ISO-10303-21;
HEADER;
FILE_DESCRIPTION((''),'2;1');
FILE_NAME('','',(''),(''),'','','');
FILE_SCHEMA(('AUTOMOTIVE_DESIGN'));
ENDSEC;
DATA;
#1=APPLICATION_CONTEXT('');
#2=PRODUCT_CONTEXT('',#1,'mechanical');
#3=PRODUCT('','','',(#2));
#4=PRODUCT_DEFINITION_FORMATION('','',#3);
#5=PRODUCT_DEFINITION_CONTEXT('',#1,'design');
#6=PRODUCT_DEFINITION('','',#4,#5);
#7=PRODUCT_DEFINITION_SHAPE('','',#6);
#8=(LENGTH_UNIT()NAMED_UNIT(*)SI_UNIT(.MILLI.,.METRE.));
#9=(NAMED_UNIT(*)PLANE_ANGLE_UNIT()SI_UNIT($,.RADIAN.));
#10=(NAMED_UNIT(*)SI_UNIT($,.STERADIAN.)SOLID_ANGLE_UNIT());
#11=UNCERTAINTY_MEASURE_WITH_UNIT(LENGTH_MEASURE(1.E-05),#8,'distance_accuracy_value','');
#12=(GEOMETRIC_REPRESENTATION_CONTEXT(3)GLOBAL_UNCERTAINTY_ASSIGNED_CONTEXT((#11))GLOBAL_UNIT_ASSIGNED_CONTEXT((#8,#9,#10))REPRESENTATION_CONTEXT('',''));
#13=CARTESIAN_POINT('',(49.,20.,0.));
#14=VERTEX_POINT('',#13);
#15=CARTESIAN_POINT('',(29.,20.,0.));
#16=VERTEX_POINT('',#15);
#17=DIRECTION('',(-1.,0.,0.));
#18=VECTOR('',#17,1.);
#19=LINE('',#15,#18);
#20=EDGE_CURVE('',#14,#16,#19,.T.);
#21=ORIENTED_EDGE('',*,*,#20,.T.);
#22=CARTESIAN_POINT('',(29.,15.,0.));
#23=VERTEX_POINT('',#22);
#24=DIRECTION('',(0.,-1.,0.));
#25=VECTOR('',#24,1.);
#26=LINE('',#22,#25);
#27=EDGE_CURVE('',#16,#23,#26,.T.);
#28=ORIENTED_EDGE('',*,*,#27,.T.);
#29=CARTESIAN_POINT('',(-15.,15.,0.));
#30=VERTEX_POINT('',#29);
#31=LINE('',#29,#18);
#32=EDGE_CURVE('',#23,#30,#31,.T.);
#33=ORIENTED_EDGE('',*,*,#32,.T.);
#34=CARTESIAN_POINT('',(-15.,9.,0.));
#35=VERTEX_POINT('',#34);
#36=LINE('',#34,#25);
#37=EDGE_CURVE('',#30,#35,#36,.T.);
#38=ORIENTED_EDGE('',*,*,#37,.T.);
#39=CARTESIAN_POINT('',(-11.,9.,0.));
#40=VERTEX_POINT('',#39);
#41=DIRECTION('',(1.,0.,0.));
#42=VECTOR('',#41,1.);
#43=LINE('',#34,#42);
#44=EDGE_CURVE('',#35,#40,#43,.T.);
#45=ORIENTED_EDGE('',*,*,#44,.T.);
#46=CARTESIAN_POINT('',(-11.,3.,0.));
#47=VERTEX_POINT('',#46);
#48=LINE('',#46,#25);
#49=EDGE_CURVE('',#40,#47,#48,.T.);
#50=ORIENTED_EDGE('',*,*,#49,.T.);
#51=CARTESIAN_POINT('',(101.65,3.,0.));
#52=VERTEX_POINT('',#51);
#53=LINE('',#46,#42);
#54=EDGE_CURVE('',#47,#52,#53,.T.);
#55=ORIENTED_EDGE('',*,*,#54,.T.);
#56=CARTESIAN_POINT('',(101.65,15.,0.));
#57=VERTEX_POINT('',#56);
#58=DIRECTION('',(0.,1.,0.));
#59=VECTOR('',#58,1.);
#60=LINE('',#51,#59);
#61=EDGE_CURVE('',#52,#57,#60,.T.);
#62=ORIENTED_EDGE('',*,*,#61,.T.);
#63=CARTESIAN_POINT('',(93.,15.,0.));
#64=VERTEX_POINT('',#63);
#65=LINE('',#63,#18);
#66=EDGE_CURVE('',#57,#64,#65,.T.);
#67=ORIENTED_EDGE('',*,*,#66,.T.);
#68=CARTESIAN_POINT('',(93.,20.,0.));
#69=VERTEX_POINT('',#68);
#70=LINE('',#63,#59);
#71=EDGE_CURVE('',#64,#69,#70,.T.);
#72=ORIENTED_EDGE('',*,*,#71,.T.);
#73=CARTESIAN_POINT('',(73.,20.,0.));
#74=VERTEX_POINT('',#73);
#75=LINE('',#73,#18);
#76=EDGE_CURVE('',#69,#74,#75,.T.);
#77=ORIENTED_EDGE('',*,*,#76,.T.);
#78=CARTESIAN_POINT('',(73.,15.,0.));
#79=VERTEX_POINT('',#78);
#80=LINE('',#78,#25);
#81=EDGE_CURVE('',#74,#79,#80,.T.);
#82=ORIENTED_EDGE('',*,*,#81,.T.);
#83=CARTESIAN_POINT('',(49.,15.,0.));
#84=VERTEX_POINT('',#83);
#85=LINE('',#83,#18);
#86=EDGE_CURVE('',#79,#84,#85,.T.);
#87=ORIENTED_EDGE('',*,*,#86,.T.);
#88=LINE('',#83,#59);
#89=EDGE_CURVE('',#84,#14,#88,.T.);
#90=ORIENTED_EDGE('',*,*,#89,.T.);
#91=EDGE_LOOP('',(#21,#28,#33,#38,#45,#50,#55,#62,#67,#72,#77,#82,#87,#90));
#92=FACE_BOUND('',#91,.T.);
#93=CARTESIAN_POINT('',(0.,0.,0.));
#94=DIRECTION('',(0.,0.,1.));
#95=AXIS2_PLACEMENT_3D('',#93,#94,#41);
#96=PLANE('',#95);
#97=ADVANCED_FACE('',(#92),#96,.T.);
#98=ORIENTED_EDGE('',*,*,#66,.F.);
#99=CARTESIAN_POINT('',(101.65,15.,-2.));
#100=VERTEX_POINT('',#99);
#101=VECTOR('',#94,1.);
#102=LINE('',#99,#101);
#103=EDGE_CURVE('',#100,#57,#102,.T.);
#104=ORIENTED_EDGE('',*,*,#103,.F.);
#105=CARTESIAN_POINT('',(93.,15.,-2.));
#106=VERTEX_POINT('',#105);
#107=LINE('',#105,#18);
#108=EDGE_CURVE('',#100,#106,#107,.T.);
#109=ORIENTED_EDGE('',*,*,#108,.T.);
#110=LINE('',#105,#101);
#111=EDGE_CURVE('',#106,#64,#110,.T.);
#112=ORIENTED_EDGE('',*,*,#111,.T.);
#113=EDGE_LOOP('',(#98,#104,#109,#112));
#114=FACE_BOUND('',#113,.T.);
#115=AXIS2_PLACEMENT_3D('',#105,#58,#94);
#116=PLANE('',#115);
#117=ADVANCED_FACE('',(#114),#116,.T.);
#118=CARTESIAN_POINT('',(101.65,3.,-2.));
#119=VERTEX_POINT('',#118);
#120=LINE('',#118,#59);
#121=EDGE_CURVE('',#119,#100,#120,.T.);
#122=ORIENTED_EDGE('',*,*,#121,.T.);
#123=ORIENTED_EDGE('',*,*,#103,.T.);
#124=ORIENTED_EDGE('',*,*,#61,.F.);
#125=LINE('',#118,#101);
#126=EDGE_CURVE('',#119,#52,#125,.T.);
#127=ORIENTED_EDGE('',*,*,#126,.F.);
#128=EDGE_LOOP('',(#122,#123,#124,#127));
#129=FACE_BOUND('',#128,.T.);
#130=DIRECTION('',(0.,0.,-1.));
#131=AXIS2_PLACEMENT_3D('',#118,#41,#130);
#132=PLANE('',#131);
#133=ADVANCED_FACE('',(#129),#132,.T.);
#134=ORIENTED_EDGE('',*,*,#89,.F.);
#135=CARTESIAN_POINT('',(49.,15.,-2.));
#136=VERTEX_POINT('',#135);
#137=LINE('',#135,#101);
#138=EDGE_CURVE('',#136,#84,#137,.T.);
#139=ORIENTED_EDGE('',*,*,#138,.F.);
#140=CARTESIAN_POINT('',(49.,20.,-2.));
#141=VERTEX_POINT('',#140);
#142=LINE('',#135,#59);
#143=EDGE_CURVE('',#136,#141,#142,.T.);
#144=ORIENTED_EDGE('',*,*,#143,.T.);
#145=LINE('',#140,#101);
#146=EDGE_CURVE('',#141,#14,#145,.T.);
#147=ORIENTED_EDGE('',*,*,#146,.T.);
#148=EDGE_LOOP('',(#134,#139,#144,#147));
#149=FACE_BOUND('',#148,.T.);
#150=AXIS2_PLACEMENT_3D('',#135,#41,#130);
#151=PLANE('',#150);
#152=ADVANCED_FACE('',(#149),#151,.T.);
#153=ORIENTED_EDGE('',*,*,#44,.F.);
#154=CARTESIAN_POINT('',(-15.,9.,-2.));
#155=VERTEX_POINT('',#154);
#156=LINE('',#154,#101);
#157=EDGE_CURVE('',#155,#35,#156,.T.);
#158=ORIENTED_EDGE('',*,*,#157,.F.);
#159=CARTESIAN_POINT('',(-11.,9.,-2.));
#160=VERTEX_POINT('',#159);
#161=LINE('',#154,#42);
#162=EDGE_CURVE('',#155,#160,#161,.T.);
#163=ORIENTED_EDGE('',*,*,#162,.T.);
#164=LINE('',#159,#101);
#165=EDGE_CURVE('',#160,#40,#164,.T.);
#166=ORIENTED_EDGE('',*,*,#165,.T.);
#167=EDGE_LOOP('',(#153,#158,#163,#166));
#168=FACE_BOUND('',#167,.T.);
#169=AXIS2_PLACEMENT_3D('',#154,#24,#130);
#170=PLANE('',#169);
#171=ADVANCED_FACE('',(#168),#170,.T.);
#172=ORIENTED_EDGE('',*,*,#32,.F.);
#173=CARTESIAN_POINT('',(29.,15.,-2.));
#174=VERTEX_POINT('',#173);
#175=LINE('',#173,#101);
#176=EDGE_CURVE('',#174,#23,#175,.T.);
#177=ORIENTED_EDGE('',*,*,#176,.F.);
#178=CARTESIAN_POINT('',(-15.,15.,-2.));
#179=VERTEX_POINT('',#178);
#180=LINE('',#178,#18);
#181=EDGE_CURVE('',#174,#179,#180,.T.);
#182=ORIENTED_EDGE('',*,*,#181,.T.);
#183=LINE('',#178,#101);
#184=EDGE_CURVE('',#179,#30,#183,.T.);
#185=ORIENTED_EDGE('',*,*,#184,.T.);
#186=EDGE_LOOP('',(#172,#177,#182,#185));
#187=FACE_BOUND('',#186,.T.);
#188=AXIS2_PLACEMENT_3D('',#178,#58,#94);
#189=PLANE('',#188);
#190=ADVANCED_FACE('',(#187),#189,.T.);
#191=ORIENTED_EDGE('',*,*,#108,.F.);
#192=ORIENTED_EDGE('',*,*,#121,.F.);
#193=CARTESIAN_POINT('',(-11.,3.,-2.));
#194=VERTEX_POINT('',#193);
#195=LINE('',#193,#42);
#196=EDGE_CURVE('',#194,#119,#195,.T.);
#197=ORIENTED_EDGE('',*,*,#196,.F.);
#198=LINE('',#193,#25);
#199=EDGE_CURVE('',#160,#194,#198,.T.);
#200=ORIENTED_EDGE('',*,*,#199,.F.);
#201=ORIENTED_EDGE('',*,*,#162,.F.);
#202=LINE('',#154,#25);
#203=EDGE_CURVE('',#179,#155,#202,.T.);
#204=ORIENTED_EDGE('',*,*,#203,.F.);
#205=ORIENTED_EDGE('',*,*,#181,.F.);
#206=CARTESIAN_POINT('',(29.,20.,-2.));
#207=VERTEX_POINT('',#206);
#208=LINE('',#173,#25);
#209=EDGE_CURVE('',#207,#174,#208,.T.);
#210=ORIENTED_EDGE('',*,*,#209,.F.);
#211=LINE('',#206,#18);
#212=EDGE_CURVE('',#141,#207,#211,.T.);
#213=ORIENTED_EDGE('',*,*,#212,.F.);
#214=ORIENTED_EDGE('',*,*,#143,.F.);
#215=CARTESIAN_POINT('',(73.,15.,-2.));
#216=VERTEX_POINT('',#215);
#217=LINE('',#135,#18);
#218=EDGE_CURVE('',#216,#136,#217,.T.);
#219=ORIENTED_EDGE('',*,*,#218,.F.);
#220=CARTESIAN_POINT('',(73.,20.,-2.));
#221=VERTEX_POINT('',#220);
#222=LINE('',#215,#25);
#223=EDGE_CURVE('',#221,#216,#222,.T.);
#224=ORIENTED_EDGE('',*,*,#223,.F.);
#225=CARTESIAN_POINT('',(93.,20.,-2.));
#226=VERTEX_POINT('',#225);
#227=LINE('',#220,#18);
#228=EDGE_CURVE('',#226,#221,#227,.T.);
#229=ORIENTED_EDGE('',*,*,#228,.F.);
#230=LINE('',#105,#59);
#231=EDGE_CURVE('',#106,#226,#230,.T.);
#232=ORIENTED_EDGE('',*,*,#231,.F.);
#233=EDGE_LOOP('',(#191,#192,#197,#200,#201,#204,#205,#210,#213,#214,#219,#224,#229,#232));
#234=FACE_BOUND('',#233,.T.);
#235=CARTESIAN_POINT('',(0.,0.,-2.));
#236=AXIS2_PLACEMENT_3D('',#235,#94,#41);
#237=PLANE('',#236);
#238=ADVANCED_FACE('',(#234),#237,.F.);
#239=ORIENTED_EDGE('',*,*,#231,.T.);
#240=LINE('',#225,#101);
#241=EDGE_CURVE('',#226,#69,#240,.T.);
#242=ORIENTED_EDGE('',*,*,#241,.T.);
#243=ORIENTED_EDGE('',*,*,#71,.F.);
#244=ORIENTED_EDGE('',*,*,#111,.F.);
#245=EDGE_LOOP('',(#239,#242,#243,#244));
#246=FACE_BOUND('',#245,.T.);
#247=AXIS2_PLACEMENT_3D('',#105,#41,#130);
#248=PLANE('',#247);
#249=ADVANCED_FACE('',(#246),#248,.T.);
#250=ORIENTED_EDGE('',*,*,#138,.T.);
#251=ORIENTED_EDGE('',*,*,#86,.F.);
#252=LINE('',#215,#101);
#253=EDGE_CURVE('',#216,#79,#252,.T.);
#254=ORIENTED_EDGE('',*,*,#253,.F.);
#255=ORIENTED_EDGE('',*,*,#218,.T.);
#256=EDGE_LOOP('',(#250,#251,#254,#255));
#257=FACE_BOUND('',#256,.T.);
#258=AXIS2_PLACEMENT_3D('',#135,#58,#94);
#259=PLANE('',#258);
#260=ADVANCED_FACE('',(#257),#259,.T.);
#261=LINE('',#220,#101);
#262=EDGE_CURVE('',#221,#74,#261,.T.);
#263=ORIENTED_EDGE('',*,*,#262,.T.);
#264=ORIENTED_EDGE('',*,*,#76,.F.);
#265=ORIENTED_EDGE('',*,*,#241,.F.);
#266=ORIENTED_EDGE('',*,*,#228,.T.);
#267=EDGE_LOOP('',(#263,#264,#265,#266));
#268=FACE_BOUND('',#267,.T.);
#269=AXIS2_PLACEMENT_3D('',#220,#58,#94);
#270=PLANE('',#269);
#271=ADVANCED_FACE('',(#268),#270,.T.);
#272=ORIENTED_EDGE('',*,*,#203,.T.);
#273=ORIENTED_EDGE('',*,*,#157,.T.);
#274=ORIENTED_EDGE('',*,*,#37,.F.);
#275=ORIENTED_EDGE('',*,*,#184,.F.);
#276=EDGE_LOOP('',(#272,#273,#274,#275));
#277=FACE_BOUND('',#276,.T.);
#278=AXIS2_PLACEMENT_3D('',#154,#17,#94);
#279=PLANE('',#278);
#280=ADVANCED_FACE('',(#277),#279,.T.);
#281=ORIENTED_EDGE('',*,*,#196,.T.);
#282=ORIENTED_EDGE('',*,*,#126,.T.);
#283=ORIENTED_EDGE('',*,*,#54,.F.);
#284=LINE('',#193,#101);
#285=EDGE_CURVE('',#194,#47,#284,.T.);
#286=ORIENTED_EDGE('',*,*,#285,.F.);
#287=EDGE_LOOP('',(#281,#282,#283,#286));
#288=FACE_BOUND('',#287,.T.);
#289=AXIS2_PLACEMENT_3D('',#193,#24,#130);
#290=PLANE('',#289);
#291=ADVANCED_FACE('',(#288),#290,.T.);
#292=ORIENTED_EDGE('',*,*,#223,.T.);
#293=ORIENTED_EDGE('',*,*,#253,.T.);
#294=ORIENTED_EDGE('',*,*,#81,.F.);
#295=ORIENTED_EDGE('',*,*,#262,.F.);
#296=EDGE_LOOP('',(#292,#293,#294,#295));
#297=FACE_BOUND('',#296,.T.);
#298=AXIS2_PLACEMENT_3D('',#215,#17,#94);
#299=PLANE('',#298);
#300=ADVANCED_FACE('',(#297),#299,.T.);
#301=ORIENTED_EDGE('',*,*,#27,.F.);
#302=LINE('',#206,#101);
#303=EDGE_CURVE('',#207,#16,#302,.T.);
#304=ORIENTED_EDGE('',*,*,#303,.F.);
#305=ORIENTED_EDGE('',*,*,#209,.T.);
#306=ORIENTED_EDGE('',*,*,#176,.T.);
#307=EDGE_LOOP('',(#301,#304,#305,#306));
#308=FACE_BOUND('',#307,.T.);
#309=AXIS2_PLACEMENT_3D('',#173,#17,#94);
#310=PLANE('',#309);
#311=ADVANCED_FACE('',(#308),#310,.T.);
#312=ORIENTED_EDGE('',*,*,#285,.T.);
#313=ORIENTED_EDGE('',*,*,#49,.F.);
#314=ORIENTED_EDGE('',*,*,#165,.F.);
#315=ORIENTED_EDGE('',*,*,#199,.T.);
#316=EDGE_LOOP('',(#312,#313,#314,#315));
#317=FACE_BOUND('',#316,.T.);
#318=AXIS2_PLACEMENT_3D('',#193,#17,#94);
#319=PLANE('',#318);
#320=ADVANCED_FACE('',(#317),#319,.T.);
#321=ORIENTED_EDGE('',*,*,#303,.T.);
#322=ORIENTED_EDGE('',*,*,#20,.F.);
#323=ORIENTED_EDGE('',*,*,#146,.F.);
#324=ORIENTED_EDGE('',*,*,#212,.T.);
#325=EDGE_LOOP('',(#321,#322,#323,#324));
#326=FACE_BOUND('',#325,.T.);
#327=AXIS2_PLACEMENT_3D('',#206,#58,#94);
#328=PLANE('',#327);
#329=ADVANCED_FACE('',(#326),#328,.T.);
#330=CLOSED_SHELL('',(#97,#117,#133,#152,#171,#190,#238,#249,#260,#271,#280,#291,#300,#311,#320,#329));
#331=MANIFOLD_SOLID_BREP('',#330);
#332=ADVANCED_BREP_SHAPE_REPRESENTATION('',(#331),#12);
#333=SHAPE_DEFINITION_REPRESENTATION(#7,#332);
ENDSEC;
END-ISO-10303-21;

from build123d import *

# Parameters (mm, degrees)
BASE_FLANGE1_DEPTH = 2


# Sheet-metal steps are written as plain solids
with BuildPart() as part:
    # Sketch1 → Base-Flange1 (new body)
    with BuildSketch(Plane.XY):
        Polygon((49, 15), (73, 15), (73, 20), (93, 20), (93, 15), (101.65, 15), (101.65, 3), (-11, 3), (-11, 9), (-15, 9), (-15, 15), (29, 15), (29, 20), (49, 20), align=None)
    extrude(amount=-BASE_FLANGE1_DEPTH)


solid = part.part
